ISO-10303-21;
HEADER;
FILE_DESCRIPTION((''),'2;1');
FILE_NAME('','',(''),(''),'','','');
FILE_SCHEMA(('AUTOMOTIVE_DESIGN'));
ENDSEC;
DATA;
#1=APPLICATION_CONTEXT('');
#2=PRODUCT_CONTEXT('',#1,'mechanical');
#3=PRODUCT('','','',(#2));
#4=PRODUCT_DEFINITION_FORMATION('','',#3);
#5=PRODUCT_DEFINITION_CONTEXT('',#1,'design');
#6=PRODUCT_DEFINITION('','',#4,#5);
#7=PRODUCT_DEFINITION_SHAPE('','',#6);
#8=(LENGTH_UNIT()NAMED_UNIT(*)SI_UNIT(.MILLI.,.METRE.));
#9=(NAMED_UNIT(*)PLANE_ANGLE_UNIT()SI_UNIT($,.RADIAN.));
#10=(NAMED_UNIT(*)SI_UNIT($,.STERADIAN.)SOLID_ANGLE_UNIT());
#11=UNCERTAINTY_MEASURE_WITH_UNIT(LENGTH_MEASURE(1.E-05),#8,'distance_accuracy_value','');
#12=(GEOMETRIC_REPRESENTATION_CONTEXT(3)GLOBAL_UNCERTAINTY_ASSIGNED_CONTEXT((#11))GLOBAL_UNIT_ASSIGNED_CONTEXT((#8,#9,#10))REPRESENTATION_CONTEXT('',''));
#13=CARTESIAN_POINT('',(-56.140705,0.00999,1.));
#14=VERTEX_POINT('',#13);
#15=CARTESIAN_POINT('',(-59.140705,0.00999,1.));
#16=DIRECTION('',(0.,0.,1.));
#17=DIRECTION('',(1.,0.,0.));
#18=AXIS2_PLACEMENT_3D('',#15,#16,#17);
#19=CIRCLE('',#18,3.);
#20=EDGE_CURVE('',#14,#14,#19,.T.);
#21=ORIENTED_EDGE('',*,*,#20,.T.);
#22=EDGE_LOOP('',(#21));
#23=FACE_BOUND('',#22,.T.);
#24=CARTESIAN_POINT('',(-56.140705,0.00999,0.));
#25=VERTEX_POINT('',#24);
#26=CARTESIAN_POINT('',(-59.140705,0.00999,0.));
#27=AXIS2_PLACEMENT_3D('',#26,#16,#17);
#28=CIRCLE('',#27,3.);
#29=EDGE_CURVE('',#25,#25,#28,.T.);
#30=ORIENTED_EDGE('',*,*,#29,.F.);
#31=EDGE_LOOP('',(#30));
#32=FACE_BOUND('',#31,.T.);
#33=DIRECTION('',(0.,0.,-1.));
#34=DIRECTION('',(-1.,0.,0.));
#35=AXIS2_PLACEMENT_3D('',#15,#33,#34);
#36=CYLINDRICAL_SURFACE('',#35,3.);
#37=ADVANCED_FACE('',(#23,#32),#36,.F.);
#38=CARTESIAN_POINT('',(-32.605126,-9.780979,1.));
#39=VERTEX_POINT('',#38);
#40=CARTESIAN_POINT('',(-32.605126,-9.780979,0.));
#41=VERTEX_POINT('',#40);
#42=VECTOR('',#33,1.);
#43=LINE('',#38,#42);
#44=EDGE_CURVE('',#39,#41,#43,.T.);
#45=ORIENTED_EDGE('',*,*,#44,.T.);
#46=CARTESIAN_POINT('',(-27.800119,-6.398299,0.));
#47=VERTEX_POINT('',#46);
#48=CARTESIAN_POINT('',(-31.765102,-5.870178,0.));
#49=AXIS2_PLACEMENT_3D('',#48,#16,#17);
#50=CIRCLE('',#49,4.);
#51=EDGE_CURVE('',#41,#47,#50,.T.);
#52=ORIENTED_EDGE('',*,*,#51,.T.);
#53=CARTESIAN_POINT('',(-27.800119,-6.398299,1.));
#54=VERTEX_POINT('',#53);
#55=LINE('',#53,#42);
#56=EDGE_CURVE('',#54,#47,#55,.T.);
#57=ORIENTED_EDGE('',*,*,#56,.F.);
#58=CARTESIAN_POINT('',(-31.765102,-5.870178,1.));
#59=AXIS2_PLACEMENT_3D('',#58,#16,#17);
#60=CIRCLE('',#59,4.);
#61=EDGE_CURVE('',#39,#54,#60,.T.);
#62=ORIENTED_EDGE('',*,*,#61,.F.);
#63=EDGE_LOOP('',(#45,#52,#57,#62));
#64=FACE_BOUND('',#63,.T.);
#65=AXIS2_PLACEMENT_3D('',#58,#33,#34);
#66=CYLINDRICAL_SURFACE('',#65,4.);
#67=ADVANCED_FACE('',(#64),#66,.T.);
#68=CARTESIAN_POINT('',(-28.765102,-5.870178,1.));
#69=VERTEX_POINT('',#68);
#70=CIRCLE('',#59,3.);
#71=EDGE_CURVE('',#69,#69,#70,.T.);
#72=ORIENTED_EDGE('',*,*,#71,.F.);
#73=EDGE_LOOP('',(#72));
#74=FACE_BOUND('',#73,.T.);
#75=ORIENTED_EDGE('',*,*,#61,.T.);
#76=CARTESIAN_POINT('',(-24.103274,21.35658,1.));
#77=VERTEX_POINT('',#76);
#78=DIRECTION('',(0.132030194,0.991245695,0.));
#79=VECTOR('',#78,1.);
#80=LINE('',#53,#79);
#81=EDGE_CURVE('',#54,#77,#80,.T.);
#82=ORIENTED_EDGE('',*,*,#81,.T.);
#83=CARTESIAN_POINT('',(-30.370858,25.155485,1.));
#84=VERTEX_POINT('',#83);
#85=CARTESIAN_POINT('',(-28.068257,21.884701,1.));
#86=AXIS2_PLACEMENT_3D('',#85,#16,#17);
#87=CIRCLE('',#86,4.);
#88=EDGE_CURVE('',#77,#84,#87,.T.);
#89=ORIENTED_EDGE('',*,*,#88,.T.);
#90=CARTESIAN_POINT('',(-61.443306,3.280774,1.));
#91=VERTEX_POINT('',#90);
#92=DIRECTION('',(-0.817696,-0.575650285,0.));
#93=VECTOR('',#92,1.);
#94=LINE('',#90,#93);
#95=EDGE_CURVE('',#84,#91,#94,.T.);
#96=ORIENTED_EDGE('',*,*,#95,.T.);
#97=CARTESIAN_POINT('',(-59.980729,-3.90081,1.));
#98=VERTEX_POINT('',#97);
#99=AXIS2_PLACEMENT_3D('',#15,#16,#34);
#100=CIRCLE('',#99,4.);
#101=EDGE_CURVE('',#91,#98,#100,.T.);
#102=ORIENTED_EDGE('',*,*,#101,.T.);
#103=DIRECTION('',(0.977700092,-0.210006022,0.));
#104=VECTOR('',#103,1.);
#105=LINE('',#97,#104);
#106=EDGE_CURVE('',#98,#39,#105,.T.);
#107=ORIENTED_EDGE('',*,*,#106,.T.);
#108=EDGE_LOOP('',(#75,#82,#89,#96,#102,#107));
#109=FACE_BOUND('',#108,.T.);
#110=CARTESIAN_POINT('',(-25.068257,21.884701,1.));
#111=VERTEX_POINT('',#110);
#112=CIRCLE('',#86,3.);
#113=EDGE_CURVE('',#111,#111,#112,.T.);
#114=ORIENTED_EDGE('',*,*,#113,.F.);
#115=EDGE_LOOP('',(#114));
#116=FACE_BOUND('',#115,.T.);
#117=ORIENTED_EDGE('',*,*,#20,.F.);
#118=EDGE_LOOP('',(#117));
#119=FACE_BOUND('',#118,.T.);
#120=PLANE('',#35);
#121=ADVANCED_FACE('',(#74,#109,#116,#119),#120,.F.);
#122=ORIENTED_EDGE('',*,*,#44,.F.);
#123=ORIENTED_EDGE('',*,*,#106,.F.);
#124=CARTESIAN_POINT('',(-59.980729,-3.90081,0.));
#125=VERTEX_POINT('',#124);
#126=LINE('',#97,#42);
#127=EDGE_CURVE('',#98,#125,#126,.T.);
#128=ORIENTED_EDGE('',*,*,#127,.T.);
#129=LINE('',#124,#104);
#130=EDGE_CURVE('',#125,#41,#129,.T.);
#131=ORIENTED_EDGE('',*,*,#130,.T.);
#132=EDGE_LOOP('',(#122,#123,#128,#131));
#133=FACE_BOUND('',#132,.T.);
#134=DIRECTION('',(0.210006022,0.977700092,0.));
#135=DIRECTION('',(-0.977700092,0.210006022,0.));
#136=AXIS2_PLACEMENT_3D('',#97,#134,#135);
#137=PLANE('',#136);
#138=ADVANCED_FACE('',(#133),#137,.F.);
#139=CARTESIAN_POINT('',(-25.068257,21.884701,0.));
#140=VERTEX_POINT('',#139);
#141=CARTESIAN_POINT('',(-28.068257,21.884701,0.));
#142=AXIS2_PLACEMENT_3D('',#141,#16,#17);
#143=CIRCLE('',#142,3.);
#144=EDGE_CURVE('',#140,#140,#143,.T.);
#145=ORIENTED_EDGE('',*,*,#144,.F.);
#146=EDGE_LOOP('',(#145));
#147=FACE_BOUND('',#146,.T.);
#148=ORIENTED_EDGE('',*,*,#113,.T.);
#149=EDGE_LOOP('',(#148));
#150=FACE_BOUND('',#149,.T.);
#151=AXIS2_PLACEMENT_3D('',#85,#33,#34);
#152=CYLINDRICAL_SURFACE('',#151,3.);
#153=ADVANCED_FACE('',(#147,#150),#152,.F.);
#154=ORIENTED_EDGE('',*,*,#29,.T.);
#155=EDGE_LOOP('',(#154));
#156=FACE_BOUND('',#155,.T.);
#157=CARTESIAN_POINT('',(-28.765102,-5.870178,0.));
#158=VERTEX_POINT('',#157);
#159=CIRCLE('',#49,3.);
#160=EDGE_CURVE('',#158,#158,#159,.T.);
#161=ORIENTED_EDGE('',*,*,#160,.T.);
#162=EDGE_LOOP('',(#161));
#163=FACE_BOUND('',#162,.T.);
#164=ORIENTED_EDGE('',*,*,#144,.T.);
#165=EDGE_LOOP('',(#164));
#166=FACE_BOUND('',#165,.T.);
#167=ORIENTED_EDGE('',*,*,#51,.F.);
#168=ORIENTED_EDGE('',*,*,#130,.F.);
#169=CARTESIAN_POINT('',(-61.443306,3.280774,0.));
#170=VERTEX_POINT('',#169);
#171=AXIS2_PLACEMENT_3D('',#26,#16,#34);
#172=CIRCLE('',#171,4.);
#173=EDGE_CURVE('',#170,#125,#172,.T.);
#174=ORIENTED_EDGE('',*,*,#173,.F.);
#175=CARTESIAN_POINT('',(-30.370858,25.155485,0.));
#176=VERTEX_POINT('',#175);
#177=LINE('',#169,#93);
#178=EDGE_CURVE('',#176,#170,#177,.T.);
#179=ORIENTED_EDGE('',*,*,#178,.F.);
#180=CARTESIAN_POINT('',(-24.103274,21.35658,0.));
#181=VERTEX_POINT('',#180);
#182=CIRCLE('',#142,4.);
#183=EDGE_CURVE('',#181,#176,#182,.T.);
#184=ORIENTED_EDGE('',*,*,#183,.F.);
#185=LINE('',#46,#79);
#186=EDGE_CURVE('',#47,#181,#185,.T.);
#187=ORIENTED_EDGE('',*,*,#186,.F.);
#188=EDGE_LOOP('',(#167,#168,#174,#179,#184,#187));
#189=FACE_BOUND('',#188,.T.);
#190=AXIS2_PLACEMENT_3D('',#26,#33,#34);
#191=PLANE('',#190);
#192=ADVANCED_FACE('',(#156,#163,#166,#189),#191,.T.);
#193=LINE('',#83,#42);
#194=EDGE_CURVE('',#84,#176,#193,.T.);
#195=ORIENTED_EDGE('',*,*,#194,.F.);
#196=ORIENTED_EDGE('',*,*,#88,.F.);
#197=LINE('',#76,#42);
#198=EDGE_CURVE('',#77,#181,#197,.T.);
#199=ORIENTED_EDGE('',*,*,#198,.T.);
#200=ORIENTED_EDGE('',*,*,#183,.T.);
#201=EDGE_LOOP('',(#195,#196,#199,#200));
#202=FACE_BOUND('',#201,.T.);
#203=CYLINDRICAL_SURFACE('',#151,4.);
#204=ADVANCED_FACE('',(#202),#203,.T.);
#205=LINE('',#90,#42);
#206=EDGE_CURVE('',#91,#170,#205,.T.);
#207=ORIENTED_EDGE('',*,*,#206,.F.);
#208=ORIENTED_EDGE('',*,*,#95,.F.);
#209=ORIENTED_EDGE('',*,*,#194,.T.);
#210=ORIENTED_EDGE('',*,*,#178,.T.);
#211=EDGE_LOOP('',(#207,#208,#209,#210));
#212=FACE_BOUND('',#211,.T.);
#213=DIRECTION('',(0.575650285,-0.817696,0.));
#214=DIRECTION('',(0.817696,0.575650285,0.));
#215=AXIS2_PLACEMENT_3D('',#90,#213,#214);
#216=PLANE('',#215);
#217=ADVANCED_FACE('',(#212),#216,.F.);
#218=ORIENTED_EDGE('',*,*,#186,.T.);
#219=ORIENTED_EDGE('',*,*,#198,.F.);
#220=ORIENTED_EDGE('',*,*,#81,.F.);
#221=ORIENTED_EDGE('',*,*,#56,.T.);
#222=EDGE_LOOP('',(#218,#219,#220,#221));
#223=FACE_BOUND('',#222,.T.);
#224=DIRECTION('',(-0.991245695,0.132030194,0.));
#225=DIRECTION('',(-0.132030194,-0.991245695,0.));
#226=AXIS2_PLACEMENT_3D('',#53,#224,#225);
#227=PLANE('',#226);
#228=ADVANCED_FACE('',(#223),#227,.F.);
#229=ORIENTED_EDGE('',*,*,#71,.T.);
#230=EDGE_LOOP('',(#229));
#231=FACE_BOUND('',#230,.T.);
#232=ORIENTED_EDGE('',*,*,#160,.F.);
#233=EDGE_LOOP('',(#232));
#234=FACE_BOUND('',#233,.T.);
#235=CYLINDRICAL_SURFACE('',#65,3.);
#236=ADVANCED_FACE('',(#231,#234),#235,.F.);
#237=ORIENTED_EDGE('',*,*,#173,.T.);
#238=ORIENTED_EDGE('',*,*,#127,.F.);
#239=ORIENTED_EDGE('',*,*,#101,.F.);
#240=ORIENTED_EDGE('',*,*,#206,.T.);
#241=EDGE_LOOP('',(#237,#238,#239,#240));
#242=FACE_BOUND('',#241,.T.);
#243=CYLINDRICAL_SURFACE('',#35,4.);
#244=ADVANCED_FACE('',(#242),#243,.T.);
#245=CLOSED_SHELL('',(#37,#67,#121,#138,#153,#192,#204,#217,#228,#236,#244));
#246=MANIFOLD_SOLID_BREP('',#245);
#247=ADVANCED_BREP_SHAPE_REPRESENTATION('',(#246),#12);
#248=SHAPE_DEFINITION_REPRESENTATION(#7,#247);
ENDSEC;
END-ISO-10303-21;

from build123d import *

# Parameters (mm, degrees)
ESQUISSE1_R               = 3
T_LE_DE_BASE_PLI_E1_DEPTH = 1


# Sheet-metal steps are written as plain solids
with BuildPart() as part:
    # Esquisse1 → Tôle de base pliée1 (new body)
    with BuildSketch(Plane.XY):
        with BuildLine():
            Line((-59.980728888, -3.900810235), (-32.6051263, -9.780978848))
            ThreePointArc((-32.6051263, -9.780978848), (-29.46250107, -9.14096248), (-27.800119432, -6.398299253))
            Line((-27.800119432, -6.398299253), (-24.103274011, 21.356580209))
            ThreePointArc((-24.103274011, 21.356580209), (-25.994902612, 25.305403023), (-30.370857933, 25.155484984))
            Line((-30.370857933, 25.155484984), (-61.443305942, 3.280774136))
            ThreePointArc((-61.443305942, 3.280774136), (-63.060247102, -0.788250523), (-59.980728888, -3.900810235))
        make_face()
        with Locations((-28.068256791, 21.884700983)):
            Circle(ESQUISSE1_R, mode=Mode.SUBTRACT)
        with Locations((-31.765102212, -5.870178479)):
            Circle(ESQUISSE1_R, mode=Mode.SUBTRACT)
        with Locations((-59.1407048, 0.009990135)):
            Circle(ESQUISSE1_R, mode=Mode.SUBTRACT)
    extrude(amount=T_LE_DE_BASE_PLI_E1_DEPTH)


solid = part.part
